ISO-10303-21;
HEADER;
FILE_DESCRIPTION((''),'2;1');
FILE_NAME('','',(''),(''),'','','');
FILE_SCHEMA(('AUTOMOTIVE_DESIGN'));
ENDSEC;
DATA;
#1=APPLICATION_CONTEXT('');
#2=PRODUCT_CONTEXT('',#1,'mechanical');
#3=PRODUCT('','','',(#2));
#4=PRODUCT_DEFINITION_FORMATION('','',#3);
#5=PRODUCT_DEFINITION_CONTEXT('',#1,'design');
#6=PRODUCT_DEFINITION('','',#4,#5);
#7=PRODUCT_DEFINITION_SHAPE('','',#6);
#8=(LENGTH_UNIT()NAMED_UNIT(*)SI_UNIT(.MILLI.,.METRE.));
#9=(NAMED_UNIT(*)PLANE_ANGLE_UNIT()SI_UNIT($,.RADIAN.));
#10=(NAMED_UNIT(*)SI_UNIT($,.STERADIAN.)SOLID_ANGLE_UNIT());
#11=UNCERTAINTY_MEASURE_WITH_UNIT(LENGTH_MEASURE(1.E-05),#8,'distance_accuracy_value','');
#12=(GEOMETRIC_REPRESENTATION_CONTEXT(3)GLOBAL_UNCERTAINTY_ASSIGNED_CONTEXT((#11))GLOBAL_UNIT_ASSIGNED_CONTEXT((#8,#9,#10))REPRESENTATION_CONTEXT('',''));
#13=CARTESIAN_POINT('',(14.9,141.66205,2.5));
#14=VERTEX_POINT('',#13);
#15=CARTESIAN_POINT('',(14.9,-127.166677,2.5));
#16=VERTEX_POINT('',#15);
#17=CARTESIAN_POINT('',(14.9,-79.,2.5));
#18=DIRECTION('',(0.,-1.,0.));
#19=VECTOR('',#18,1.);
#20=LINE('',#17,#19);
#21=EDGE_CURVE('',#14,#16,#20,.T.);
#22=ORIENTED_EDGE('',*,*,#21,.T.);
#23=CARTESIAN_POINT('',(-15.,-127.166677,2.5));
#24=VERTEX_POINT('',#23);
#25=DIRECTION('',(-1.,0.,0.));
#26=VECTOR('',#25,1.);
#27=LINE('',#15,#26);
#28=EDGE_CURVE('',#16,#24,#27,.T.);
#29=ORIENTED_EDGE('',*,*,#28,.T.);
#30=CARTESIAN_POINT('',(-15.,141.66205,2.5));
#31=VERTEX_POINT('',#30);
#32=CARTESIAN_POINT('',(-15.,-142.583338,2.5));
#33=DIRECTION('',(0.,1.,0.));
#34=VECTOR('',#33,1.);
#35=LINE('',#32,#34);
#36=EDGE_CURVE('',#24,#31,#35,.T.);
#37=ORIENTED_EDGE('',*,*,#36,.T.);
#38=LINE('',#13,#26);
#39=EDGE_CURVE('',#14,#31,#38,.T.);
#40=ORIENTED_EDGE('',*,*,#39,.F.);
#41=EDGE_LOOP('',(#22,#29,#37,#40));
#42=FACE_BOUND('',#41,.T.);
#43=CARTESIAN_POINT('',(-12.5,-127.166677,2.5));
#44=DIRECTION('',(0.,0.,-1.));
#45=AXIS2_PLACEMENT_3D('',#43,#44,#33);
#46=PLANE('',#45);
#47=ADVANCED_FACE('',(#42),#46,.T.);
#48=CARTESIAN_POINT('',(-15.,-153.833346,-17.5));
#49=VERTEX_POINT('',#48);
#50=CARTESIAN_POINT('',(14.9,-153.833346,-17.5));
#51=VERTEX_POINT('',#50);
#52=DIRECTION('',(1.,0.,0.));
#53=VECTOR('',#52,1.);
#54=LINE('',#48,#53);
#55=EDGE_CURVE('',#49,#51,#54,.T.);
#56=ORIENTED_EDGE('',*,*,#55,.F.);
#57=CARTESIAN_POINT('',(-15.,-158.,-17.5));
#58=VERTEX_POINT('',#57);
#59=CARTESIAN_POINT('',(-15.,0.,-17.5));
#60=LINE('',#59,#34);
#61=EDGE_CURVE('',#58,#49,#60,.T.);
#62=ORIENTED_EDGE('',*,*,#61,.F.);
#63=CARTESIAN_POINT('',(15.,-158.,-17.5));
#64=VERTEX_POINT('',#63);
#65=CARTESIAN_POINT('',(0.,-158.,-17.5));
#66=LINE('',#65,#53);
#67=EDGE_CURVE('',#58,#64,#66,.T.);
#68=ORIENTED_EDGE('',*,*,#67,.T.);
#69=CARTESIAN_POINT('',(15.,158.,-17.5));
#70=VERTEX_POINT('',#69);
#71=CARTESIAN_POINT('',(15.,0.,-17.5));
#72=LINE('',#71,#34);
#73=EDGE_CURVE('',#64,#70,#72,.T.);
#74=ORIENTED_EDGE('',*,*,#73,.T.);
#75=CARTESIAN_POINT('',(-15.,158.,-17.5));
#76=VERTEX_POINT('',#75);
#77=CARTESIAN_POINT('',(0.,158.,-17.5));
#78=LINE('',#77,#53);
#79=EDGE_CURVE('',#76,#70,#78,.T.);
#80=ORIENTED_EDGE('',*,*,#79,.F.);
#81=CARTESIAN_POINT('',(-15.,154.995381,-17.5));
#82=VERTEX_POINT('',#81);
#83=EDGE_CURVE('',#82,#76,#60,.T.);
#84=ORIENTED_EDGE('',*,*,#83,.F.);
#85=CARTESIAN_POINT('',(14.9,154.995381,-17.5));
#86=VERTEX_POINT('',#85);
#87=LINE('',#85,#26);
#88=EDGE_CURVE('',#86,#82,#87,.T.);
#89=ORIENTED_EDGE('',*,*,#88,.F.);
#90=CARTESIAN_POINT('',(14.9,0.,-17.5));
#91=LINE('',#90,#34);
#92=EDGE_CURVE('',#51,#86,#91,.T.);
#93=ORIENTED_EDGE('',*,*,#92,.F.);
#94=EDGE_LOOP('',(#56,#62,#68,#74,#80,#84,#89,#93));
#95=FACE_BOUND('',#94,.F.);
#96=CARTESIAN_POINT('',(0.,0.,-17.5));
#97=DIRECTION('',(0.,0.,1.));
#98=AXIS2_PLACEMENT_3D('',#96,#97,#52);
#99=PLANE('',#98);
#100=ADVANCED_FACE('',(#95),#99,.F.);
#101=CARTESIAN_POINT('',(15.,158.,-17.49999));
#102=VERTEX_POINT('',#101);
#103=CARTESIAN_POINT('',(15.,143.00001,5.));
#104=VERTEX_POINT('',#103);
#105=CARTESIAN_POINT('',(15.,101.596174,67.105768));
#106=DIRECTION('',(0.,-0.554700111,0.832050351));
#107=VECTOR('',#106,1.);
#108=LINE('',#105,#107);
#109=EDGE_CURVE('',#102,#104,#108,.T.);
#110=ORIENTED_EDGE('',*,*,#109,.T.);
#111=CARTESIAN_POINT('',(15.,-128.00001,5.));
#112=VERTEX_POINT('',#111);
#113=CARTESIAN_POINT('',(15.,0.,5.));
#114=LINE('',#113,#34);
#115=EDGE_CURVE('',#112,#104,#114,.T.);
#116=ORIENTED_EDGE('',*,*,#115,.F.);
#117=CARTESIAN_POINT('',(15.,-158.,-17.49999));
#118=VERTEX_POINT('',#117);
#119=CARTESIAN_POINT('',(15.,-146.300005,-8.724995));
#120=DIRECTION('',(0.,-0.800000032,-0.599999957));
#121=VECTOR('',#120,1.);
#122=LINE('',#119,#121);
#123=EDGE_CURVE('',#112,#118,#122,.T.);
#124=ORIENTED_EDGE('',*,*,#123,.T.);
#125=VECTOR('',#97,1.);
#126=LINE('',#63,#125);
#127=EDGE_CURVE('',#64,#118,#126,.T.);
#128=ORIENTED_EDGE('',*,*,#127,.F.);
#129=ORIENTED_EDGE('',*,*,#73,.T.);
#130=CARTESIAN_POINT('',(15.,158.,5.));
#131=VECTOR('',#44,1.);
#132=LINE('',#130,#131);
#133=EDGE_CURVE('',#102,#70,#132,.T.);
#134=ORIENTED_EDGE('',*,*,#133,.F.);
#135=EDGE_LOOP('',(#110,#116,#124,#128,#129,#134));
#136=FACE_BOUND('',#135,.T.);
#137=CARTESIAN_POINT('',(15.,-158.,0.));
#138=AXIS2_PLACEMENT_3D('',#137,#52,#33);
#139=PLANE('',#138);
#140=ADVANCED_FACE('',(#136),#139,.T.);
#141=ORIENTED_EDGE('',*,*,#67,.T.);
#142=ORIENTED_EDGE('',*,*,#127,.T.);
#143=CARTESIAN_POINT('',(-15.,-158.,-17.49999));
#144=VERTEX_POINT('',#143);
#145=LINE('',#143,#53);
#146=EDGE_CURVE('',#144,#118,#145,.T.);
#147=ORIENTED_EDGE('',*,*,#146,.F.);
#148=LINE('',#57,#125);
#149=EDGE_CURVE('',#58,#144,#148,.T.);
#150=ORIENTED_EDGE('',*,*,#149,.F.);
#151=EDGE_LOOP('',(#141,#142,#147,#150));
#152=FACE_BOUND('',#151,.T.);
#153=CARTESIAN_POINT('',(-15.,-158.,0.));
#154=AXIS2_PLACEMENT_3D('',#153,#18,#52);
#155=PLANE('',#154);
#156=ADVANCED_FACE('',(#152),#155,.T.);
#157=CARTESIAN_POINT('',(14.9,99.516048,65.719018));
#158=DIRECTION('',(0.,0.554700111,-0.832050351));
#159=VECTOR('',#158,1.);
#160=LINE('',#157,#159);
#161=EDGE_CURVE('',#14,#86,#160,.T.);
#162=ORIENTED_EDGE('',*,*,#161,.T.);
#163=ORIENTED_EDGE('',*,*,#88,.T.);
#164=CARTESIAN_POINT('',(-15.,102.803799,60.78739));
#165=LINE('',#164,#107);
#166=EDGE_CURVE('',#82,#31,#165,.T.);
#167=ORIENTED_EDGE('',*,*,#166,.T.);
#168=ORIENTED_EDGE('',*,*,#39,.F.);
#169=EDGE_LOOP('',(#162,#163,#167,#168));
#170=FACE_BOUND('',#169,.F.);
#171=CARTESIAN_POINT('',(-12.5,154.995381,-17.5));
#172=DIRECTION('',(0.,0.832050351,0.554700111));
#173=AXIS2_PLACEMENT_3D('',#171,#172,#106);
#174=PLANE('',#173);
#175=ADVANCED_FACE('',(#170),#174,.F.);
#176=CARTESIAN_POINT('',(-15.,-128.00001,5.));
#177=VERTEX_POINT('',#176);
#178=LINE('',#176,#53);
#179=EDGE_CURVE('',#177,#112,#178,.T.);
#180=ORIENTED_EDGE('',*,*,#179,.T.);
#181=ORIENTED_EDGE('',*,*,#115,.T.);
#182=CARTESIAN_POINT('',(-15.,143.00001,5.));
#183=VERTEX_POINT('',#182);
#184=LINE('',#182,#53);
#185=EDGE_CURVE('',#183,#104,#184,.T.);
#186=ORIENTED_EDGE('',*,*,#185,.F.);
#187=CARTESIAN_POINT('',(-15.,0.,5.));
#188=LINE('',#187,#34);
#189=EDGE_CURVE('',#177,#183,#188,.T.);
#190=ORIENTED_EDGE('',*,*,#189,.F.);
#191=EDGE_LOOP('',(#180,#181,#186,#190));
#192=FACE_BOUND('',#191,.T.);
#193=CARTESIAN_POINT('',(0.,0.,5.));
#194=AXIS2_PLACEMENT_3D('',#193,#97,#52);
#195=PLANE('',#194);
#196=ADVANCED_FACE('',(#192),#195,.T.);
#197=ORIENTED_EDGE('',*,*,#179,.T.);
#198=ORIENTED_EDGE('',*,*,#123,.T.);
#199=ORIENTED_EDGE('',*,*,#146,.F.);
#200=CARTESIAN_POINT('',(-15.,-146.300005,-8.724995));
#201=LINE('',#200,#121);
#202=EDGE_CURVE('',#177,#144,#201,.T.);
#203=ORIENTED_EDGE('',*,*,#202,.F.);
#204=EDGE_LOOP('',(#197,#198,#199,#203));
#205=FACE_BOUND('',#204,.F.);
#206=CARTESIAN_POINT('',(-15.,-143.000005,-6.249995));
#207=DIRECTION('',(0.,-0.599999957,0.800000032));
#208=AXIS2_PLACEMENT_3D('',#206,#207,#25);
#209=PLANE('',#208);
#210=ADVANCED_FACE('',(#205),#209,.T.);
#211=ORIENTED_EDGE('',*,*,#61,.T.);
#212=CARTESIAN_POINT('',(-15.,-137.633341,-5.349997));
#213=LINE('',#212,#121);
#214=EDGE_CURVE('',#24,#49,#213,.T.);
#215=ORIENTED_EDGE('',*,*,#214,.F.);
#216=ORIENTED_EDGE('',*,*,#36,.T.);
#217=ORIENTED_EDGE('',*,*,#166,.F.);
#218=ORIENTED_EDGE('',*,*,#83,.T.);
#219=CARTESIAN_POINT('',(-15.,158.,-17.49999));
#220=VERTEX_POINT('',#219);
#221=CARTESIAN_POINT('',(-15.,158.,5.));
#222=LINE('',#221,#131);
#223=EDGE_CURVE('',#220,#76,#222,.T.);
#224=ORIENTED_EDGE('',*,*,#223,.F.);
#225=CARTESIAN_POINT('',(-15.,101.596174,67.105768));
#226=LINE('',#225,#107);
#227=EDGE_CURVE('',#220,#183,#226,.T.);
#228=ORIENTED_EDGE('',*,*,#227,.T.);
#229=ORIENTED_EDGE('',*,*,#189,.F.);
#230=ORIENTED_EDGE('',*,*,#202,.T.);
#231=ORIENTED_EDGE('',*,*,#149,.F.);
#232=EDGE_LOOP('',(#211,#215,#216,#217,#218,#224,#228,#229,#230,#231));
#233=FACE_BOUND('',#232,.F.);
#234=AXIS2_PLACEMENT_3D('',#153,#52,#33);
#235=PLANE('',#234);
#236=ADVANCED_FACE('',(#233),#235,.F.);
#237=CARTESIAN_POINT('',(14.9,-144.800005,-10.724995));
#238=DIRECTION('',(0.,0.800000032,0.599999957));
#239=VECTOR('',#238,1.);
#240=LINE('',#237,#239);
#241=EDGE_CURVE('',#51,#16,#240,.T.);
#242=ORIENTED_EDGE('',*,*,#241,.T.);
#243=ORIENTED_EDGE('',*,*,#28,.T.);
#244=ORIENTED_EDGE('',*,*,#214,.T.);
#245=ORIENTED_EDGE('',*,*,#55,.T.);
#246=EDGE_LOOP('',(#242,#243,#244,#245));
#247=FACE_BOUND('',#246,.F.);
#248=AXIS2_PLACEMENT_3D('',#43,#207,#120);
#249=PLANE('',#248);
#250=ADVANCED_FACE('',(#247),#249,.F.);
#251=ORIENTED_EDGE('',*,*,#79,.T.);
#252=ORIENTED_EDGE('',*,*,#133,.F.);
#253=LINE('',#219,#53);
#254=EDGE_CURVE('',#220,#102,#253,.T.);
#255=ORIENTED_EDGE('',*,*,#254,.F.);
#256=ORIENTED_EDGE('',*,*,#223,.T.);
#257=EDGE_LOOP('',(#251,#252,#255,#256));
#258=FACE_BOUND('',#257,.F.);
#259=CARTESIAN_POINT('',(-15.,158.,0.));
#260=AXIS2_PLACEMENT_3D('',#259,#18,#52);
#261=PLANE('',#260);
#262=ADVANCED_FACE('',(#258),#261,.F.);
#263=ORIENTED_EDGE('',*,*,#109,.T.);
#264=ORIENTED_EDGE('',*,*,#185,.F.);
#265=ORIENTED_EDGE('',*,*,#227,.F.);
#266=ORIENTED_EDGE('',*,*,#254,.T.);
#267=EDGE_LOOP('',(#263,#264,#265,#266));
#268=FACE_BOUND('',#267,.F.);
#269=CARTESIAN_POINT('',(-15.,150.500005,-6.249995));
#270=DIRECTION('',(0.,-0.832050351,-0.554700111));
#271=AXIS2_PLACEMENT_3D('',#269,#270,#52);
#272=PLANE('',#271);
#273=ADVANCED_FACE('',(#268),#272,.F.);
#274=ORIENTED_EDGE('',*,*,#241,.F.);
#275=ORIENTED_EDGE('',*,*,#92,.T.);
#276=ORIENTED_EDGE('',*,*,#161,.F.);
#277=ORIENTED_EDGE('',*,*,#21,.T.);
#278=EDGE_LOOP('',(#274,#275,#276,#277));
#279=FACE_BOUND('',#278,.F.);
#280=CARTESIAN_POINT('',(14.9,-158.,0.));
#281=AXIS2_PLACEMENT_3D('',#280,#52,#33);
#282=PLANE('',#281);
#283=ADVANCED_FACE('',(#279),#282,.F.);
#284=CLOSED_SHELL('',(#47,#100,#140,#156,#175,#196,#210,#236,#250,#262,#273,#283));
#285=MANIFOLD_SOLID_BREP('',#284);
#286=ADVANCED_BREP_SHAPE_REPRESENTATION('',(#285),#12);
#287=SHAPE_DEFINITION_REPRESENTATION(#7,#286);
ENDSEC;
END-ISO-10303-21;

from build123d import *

# Parameters (mm, degrees)
F0_W     = 30
F0_H     = 316
F1_DEPTH = 5
F2_DEPTH = 17.5
F3_SIZE2 = 14.99999
F3_SIZE  = 22.49999
F4_SIZE2 = 22.49999
F4_SIZE  = 29.99999
F5_T     = 2.5
F6_DEPTH = 25
F7_DEPTH = 2.4


# Not quite as in the source:
# - a fillet or chamfer is up to 0.001 mm smaller than in the source, because OpenCascade refuses the exact size
# - a shell that OpenCascade refuses in one call is made with other operations: the cavity is built on its own and cut out


with BuildPart() as f1:
    # F0 (on Top) → F1 (new body)
    with BuildSketch(Plane.XY):
        Rectangle(F0_W, F0_H)
    extrude(amount=F1_DEPTH)

    # F2 (add): a face of the model
    f2_faces = [f1.faces().sort_by_distance(p)[0] for p in [
        (0, 0, 0),
    ]]
    extrude(f2_faces, amount=F2_DEPTH)

    # F3 (size 22.5 and 15 in the source; OpenCascade refuses exactly that, so slightly less here)
    f3_edges = [f1.edges().sort_by_distance(p)[0] for p in [
        (0, 158, 5),
    ]]
    f3_side = f1.faces().sort_by_distance((0, 158, -6.25))[0]
    chamfer(f3_edges, length=F3_SIZE, length2=F3_SIZE2, reference=f3_side)

    # F4 (size 30 and 22.5 in the source; OpenCascade refuses exactly that, so slightly less here)
    f4_edges = [f1.edges().sort_by_distance(p)[0] for p in [
        (0, -158, 5),
    ]]
    f4_side = f1.faces().sort_by_distance((0, -7.499995, 5))[0]
    chamfer(f4_edges, length=F4_SIZE, length2=F4_SIZE2, reference=f4_side)

    # F5: shell of thickness 2.5, made by hand


with BuildPart() as f5_core1:
    # F5_t2: copy of F1
    add(f1.part)

    # the walls: a layer under each face that stays
    f5_faces = [f5_core1.faces().sort_by_distance(p)[0] for p in [
        (15, 0, -6.25),
        (0, 7.5, 5),
        (0, -143.000005, -6.249995),
        (0, 150.500005, -6.249995),
        (0, -158, -17.499995),
        (0, 158, -17.499995),
        (-15, 0, -6.25),
    ]]
    thicken(f5_faces, amount=-F5_T, mode=Mode.SUBTRACT)


with BuildPart() as f1_1:
    add(f1.part)

    # what is left inside the walls is the cavity
    f5_cavity = [f5_core1.part.solids().sort_by_distance(p)[0] for p in [
        (0, -50.890437, -17.475),
    ]]
    add(f5_cavity, mode=Mode.SUBTRACT)

    # F6 (cut): a face of the model
    f6_faces = [f1_1.faces().sort_by_distance(p)[0] for p in [
        (-12.5, 3.8374129004, -7.7308172989),
    ]]
    extrude(f6_faces, amount=-F6_DEPTH, mode=Mode.SUBTRACT)

    # F7 (cut): a face of the model
    f7_faces = [f1_1.faces().sort_by_distance(p)[0] for p in [
        (12.5, 3.8374129004, -7.7308172989),
    ]]
    extrude(f7_faces, amount=-F7_DEPTH, mode=Mode.SUBTRACT)


solid = f1_1.part
